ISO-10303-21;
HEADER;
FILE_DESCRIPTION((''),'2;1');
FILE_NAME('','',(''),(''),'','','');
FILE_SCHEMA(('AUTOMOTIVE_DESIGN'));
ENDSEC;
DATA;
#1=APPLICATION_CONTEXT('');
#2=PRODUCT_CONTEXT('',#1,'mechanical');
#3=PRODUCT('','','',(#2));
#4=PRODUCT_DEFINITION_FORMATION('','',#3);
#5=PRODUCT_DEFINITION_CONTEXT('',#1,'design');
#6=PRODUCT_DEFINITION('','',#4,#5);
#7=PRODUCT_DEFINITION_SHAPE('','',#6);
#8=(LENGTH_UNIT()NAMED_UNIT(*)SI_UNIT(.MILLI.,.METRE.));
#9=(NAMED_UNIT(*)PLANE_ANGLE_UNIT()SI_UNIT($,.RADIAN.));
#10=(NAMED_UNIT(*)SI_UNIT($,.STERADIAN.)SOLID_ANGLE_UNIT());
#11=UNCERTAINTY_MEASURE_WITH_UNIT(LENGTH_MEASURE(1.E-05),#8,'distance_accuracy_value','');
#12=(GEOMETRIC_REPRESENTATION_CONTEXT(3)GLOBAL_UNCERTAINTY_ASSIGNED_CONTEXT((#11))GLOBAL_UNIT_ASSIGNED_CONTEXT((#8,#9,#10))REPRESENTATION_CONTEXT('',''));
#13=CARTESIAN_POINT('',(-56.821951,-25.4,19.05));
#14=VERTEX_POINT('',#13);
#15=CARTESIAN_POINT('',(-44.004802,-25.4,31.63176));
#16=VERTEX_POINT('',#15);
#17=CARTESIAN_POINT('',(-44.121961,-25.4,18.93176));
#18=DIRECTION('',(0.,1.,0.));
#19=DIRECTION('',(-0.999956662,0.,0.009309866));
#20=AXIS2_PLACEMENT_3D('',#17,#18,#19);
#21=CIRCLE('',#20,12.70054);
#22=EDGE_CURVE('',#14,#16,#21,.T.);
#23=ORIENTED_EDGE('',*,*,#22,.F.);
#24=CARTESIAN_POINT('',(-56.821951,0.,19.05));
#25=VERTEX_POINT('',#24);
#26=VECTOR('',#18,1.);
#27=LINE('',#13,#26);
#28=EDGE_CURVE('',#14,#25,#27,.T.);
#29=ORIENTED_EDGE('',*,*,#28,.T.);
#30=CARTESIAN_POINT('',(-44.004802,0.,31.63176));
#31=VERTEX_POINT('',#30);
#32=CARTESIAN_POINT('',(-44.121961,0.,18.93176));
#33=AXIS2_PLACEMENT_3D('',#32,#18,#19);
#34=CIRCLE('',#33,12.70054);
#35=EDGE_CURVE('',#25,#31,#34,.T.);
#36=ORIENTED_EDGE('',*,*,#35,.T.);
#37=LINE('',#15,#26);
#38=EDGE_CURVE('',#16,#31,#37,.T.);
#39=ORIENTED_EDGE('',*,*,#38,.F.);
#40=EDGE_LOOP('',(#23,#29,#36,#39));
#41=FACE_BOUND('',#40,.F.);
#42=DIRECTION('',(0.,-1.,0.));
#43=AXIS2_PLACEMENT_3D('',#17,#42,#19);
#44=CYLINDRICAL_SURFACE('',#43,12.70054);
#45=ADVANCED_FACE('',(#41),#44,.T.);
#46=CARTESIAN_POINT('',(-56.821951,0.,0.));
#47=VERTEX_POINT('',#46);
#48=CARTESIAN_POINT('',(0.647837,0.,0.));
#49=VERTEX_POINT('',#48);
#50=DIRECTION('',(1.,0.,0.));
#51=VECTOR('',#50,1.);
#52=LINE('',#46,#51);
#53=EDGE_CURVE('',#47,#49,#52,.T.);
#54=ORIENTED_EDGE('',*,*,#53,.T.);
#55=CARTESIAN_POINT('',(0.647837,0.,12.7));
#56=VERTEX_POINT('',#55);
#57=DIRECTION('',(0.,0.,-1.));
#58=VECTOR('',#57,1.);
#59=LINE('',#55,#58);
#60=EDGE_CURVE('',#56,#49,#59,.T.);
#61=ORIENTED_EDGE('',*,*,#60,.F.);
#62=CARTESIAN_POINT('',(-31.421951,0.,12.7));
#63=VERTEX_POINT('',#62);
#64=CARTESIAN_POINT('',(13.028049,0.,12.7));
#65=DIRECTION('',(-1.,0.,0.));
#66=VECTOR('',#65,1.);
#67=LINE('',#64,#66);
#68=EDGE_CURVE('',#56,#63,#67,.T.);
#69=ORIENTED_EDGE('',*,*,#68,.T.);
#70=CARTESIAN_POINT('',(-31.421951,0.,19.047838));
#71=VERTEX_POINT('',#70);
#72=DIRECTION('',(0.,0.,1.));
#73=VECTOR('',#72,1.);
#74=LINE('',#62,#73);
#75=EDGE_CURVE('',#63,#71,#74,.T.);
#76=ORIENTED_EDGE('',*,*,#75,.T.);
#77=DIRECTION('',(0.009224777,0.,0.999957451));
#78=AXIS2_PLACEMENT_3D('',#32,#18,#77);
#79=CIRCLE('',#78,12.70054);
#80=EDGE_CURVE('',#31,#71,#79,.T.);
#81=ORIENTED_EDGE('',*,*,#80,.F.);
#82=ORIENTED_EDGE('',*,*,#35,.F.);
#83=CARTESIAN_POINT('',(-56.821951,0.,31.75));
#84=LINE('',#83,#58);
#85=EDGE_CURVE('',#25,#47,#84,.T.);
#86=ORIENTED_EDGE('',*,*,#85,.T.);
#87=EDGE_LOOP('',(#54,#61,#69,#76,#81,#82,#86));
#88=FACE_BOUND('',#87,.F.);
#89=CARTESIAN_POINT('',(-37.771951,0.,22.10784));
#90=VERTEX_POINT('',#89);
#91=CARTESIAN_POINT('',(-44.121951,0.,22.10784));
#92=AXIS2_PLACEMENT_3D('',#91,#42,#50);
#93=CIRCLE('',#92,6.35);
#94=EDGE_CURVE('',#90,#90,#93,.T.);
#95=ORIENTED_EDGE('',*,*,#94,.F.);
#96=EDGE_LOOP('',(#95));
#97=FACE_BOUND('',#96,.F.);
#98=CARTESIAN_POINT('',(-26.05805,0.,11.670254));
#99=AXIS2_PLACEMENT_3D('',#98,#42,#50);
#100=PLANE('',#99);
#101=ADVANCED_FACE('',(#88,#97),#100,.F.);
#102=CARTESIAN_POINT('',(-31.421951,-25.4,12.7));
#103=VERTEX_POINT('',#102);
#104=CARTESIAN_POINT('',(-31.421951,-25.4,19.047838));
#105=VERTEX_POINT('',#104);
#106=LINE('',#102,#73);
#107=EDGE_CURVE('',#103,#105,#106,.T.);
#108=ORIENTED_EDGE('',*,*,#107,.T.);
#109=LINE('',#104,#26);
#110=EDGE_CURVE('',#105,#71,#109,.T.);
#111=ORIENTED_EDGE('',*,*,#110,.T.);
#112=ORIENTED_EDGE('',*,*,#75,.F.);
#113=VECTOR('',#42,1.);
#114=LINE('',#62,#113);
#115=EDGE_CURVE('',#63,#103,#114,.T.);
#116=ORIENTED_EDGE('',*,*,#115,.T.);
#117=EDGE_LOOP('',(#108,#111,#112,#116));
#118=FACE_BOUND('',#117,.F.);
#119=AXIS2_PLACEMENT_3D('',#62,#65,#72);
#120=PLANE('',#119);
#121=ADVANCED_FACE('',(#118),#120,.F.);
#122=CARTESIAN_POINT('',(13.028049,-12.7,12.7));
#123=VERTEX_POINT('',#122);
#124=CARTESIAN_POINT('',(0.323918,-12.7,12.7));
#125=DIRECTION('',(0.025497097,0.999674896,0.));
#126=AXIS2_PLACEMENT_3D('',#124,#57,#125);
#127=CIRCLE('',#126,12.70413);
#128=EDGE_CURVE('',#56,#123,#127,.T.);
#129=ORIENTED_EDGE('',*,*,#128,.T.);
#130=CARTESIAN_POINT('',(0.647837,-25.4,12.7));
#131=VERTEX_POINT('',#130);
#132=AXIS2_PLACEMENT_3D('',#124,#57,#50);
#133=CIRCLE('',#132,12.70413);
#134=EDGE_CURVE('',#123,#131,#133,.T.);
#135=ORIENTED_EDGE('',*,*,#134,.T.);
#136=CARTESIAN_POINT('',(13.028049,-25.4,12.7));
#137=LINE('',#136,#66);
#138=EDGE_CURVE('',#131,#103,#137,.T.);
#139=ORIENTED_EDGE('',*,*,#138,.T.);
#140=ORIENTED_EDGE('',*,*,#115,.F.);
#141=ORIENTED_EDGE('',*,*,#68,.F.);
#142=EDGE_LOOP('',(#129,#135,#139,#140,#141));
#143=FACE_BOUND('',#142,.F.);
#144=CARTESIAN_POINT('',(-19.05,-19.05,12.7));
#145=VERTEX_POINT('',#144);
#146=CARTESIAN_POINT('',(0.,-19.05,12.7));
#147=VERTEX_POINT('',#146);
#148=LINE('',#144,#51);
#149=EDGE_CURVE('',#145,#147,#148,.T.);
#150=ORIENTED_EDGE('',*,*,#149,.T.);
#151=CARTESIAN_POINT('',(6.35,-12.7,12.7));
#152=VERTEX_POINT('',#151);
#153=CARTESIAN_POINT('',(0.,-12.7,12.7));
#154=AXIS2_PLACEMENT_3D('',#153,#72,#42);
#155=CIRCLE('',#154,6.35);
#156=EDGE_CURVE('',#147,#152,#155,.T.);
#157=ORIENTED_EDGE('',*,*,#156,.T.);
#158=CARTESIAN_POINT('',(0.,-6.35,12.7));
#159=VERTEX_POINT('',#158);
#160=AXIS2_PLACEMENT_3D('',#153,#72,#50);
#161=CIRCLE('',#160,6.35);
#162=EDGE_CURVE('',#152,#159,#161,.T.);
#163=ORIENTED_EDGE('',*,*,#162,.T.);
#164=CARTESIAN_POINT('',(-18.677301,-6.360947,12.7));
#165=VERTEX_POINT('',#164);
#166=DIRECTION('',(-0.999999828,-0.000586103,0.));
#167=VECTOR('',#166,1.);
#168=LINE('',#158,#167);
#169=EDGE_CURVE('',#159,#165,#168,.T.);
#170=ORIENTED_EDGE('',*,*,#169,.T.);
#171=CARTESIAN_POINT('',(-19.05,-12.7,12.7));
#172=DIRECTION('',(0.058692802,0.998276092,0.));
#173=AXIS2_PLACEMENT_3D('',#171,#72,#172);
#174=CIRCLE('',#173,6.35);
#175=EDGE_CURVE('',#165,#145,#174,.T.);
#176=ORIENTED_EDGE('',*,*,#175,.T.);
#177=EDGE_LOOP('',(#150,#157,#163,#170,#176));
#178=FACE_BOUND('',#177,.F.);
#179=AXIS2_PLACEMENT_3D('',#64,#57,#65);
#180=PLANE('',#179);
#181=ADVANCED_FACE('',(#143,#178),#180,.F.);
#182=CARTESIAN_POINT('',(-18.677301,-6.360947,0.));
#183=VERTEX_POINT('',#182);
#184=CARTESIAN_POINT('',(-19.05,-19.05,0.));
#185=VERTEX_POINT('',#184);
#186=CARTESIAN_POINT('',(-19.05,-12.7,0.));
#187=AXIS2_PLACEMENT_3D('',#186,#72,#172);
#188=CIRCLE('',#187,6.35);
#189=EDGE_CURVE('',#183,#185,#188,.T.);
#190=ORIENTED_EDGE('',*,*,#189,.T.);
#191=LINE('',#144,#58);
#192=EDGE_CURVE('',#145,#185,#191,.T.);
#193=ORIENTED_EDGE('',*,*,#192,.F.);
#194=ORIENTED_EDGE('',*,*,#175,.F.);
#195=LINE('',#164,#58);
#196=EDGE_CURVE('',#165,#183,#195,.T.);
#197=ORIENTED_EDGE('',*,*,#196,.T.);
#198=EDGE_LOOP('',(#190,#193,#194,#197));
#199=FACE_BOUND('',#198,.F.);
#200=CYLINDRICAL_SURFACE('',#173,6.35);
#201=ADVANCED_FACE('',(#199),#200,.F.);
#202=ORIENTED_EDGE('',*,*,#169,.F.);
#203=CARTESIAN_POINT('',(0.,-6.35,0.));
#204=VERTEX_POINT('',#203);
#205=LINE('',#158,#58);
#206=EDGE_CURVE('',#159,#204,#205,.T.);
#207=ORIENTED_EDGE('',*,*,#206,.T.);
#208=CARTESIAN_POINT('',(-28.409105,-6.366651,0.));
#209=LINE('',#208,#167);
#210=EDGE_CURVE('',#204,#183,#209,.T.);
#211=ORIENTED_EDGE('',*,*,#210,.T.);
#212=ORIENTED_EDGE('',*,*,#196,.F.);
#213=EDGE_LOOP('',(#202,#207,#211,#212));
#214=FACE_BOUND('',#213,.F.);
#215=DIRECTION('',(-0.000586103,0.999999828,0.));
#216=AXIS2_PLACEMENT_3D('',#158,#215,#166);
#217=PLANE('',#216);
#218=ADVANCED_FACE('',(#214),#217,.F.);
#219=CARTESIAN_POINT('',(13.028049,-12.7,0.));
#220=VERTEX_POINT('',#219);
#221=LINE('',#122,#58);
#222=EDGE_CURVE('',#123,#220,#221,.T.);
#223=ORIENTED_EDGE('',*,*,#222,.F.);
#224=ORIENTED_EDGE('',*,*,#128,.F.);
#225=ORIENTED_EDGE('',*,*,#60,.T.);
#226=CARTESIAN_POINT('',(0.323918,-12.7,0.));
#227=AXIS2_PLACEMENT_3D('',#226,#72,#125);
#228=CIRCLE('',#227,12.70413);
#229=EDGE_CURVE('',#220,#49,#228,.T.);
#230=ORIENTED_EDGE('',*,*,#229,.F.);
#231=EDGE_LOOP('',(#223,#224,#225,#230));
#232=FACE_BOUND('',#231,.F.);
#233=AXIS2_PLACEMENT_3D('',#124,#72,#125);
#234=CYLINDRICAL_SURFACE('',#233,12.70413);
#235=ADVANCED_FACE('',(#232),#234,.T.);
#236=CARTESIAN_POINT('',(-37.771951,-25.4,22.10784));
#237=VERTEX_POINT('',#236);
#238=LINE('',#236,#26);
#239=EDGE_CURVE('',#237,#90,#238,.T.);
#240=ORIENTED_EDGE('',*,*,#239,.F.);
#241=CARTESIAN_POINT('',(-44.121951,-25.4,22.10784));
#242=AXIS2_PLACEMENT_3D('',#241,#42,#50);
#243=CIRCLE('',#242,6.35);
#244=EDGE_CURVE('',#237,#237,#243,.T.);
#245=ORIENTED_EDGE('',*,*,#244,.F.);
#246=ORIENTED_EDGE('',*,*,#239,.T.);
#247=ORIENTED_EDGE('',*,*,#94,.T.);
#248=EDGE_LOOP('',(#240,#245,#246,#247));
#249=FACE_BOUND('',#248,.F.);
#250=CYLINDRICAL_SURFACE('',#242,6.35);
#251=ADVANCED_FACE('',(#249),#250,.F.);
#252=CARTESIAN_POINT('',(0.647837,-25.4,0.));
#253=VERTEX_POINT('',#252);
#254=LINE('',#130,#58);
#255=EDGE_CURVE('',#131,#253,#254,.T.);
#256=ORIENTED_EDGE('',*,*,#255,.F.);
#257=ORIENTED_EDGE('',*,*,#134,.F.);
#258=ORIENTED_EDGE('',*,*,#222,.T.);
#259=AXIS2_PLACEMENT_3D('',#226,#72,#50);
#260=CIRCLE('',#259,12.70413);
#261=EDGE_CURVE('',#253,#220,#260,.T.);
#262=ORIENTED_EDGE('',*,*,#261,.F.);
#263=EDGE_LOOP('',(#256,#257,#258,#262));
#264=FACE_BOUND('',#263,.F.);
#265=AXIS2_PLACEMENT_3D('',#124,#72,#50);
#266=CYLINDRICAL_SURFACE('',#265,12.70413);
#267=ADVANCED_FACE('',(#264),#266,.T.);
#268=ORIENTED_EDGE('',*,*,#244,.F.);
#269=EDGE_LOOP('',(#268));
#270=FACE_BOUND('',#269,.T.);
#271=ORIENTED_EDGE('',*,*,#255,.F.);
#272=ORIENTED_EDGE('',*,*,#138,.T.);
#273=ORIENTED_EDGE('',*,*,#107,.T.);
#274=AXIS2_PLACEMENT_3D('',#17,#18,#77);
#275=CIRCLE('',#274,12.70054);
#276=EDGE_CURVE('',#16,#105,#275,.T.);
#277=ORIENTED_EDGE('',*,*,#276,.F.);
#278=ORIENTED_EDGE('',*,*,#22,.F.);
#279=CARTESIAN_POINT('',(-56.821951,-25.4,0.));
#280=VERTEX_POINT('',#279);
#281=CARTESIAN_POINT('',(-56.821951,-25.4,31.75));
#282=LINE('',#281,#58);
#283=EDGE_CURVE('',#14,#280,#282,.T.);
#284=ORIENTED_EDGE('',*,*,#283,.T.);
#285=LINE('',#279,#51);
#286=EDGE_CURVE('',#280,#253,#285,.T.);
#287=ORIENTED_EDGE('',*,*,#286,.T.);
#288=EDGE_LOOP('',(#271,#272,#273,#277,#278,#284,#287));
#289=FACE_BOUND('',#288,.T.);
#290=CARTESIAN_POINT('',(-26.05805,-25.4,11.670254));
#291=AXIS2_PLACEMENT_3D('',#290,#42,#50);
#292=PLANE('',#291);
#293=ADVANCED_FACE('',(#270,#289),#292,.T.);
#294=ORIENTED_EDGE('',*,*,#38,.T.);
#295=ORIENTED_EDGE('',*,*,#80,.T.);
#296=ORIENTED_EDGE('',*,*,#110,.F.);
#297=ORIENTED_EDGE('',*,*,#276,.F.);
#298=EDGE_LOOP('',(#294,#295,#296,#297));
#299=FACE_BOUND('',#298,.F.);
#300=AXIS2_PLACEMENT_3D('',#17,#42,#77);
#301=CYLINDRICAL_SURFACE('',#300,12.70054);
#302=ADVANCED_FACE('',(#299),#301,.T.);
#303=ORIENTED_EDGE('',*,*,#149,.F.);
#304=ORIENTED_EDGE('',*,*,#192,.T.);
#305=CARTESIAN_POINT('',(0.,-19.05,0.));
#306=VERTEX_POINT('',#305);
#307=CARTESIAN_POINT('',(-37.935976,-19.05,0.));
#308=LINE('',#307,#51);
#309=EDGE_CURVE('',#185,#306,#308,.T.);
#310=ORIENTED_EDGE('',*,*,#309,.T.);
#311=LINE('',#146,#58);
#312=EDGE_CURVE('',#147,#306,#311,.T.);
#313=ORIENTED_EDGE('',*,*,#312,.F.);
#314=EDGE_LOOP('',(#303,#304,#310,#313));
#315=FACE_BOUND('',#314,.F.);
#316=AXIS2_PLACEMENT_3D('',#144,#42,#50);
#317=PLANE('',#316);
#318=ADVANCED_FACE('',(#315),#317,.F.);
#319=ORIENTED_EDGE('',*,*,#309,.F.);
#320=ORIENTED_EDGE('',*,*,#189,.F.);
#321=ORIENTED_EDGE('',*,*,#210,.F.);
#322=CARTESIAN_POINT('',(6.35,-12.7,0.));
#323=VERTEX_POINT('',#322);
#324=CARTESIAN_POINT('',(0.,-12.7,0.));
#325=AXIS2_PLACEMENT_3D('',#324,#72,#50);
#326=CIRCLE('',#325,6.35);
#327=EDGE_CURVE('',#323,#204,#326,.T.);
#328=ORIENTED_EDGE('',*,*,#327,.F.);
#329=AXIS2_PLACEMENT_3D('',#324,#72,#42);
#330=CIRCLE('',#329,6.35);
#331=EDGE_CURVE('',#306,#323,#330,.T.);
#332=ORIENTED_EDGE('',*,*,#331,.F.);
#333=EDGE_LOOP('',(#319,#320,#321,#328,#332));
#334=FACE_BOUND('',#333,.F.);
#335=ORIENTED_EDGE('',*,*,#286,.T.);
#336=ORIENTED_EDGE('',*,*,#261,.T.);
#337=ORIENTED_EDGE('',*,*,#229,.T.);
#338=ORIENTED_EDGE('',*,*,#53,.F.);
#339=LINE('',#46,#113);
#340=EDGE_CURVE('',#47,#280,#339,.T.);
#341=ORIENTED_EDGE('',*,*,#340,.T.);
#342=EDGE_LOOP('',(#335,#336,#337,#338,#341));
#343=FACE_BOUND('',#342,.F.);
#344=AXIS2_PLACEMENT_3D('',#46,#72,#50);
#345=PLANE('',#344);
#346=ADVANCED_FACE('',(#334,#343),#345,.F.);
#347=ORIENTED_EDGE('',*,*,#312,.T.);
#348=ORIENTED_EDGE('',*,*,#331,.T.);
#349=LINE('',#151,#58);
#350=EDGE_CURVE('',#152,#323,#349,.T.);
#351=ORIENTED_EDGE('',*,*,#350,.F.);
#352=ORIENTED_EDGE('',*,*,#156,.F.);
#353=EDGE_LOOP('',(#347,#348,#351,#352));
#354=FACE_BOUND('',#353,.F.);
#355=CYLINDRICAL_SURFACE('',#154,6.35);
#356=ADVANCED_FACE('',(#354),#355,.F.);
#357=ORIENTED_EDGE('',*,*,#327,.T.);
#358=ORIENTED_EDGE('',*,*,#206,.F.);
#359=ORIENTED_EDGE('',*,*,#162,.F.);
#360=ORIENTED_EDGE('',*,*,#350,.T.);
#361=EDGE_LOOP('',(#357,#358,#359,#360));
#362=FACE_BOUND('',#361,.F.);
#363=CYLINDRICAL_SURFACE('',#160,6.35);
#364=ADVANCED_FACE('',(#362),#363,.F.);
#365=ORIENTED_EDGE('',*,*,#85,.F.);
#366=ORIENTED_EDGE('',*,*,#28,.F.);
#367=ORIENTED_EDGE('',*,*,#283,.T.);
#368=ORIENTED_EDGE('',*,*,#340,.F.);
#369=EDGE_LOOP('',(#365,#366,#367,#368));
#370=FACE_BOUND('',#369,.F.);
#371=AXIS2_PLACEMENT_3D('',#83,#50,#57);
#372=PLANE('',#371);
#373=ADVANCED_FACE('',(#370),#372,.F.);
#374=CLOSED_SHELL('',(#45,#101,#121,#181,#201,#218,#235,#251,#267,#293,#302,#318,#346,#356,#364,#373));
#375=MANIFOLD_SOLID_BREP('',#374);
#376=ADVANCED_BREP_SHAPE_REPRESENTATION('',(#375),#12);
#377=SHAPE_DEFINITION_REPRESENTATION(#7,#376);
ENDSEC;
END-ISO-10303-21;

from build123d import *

# Parameters (mm, degrees)
F1_DEPTH = 25.4
F2_R     = 6.35
F3_DEPTH = 25.401
F5_DEPTH = 25.4
F7_DEPTH = 12.701
F9_DEPTH = 12.701


# Not quite as in the source:
# - ends of sketch curves that miss each other by under 0.0002 mm in the source are joined


with BuildPart() as f1:
    # F0 (on Front) → F1 (new body)
    with BuildSketch(Plane.XZ):
        Polygon((-31.4219513942, 31.5156808858), (-56.8219513942, 31.75), (-56.8219513942, 0), (13.0280486058, 0), (13.0280486058, 12.7), (-31.4219513942, 12.7), align=None)
    extrude(amount=F1_DEPTH)

    # F2 (on face) → F3 (cut, through all)
    with BuildSketch(Plane.XZ.offset(25.4)):
        with Locations((-44.1219513942, 22.1078404429)):
            Circle(F2_R)
    extrude(amount=-F3_DEPTH, mode=Mode.SUBTRACT)

    # F4 (on face) → F5 (cut)
    with BuildSketch(Plane.XZ.offset(25.4)):
        with BuildLine():
            ThreePointArc((-56.8219513942, 19.05), (-53.0189875224, 27.9952387553), (-44.0048017085, 31.6317597181))
            Line((-44.0048017085, 31.6317597181), (-56.8219513942, 31.75))
            Line((-56.8219513942, 31.75), (-56.8219513942, 19.05))
        make_face()
        with BuildLine():
            ThreePointArc((-44.0048017085, 31.6317597181), (-35.1409409401, 27.9120157755), (-31.4219513942, 19.0478384602))
            Line((-31.4219513942, 19.0478384602), (-31.4219513942, 31.5156808858))
            Line((-31.4219513942, 31.5156808858), (-44.0048017085, 31.6317597181))
        make_face()
    extrude(amount=-F5_DEPTH, mode=Mode.SUBTRACT)

    # F6 (on face) → F7 (cut, through all)
    with BuildSketch(Plane.XY.offset(12.7)):
        with BuildLine():
            ThreePointArc((-19.05, -19.05), (-14.5598719395, -17.1901280605), (-12.7, -12.7))
            ThreePointArc((-12.7, -12.7), (-14.4299815751, -8.3436334229), (-18.6773007098, -6.3609468184))
            ThreePointArc((-18.6773007098, -6.3609468184), (-25.3972627054, -12.5135699905), (-19.05, -19.05))
        make_face()
        with BuildLine():
            ThreePointArc((-18.6773007098, -6.3609468184), (-14.4299815751, -8.3436334229), (-12.7, -12.7))
            ThreePointArc((-12.7, -12.7), (-14.5598719395, -17.1901280605), (-19.05, -19.05))
            Line((-19.05, -19.05), (0, -19.05))
            ThreePointArc((0, -19.05), (4.4901280605, -17.1901280605), (6.35, -12.7))
            ThreePointArc((6.35, -12.7), (4.4901280605, -8.2098719395), (0, -6.35))
            Line((0, -6.35), (-18.6773007098, -6.3609468184))
        make_face()
    extrude(amount=-F7_DEPTH, mode=Mode.SUBTRACT)

    # F8 (on face) → F9 (cut, through all)
    with BuildSketch(Plane.XY.offset(12.7)):
        with BuildLine():
            ThreePointArc((0.6478368888, 0), (9.420896658, -3.8320853331), (13.0280486058, -12.7))
            Line((13.0280486058, -12.7), (13.0280486058, 0))
            Line((13.0280486058, 0), (0.6478368888, 0))
        make_face()
        with BuildLine():
            ThreePointArc((13.0280486058, -12.7), (9.420896658, -21.5679146669), (0.6478368888, -25.4))
            Line((0.6478368888, -25.4), (13.0280486058, -25.4))
            Line((13.0280486058, -25.4), (13.0280486058, -12.7))
        make_face()
    extrude(amount=-F9_DEPTH, mode=Mode.SUBTRACT)


solid = f1.part
